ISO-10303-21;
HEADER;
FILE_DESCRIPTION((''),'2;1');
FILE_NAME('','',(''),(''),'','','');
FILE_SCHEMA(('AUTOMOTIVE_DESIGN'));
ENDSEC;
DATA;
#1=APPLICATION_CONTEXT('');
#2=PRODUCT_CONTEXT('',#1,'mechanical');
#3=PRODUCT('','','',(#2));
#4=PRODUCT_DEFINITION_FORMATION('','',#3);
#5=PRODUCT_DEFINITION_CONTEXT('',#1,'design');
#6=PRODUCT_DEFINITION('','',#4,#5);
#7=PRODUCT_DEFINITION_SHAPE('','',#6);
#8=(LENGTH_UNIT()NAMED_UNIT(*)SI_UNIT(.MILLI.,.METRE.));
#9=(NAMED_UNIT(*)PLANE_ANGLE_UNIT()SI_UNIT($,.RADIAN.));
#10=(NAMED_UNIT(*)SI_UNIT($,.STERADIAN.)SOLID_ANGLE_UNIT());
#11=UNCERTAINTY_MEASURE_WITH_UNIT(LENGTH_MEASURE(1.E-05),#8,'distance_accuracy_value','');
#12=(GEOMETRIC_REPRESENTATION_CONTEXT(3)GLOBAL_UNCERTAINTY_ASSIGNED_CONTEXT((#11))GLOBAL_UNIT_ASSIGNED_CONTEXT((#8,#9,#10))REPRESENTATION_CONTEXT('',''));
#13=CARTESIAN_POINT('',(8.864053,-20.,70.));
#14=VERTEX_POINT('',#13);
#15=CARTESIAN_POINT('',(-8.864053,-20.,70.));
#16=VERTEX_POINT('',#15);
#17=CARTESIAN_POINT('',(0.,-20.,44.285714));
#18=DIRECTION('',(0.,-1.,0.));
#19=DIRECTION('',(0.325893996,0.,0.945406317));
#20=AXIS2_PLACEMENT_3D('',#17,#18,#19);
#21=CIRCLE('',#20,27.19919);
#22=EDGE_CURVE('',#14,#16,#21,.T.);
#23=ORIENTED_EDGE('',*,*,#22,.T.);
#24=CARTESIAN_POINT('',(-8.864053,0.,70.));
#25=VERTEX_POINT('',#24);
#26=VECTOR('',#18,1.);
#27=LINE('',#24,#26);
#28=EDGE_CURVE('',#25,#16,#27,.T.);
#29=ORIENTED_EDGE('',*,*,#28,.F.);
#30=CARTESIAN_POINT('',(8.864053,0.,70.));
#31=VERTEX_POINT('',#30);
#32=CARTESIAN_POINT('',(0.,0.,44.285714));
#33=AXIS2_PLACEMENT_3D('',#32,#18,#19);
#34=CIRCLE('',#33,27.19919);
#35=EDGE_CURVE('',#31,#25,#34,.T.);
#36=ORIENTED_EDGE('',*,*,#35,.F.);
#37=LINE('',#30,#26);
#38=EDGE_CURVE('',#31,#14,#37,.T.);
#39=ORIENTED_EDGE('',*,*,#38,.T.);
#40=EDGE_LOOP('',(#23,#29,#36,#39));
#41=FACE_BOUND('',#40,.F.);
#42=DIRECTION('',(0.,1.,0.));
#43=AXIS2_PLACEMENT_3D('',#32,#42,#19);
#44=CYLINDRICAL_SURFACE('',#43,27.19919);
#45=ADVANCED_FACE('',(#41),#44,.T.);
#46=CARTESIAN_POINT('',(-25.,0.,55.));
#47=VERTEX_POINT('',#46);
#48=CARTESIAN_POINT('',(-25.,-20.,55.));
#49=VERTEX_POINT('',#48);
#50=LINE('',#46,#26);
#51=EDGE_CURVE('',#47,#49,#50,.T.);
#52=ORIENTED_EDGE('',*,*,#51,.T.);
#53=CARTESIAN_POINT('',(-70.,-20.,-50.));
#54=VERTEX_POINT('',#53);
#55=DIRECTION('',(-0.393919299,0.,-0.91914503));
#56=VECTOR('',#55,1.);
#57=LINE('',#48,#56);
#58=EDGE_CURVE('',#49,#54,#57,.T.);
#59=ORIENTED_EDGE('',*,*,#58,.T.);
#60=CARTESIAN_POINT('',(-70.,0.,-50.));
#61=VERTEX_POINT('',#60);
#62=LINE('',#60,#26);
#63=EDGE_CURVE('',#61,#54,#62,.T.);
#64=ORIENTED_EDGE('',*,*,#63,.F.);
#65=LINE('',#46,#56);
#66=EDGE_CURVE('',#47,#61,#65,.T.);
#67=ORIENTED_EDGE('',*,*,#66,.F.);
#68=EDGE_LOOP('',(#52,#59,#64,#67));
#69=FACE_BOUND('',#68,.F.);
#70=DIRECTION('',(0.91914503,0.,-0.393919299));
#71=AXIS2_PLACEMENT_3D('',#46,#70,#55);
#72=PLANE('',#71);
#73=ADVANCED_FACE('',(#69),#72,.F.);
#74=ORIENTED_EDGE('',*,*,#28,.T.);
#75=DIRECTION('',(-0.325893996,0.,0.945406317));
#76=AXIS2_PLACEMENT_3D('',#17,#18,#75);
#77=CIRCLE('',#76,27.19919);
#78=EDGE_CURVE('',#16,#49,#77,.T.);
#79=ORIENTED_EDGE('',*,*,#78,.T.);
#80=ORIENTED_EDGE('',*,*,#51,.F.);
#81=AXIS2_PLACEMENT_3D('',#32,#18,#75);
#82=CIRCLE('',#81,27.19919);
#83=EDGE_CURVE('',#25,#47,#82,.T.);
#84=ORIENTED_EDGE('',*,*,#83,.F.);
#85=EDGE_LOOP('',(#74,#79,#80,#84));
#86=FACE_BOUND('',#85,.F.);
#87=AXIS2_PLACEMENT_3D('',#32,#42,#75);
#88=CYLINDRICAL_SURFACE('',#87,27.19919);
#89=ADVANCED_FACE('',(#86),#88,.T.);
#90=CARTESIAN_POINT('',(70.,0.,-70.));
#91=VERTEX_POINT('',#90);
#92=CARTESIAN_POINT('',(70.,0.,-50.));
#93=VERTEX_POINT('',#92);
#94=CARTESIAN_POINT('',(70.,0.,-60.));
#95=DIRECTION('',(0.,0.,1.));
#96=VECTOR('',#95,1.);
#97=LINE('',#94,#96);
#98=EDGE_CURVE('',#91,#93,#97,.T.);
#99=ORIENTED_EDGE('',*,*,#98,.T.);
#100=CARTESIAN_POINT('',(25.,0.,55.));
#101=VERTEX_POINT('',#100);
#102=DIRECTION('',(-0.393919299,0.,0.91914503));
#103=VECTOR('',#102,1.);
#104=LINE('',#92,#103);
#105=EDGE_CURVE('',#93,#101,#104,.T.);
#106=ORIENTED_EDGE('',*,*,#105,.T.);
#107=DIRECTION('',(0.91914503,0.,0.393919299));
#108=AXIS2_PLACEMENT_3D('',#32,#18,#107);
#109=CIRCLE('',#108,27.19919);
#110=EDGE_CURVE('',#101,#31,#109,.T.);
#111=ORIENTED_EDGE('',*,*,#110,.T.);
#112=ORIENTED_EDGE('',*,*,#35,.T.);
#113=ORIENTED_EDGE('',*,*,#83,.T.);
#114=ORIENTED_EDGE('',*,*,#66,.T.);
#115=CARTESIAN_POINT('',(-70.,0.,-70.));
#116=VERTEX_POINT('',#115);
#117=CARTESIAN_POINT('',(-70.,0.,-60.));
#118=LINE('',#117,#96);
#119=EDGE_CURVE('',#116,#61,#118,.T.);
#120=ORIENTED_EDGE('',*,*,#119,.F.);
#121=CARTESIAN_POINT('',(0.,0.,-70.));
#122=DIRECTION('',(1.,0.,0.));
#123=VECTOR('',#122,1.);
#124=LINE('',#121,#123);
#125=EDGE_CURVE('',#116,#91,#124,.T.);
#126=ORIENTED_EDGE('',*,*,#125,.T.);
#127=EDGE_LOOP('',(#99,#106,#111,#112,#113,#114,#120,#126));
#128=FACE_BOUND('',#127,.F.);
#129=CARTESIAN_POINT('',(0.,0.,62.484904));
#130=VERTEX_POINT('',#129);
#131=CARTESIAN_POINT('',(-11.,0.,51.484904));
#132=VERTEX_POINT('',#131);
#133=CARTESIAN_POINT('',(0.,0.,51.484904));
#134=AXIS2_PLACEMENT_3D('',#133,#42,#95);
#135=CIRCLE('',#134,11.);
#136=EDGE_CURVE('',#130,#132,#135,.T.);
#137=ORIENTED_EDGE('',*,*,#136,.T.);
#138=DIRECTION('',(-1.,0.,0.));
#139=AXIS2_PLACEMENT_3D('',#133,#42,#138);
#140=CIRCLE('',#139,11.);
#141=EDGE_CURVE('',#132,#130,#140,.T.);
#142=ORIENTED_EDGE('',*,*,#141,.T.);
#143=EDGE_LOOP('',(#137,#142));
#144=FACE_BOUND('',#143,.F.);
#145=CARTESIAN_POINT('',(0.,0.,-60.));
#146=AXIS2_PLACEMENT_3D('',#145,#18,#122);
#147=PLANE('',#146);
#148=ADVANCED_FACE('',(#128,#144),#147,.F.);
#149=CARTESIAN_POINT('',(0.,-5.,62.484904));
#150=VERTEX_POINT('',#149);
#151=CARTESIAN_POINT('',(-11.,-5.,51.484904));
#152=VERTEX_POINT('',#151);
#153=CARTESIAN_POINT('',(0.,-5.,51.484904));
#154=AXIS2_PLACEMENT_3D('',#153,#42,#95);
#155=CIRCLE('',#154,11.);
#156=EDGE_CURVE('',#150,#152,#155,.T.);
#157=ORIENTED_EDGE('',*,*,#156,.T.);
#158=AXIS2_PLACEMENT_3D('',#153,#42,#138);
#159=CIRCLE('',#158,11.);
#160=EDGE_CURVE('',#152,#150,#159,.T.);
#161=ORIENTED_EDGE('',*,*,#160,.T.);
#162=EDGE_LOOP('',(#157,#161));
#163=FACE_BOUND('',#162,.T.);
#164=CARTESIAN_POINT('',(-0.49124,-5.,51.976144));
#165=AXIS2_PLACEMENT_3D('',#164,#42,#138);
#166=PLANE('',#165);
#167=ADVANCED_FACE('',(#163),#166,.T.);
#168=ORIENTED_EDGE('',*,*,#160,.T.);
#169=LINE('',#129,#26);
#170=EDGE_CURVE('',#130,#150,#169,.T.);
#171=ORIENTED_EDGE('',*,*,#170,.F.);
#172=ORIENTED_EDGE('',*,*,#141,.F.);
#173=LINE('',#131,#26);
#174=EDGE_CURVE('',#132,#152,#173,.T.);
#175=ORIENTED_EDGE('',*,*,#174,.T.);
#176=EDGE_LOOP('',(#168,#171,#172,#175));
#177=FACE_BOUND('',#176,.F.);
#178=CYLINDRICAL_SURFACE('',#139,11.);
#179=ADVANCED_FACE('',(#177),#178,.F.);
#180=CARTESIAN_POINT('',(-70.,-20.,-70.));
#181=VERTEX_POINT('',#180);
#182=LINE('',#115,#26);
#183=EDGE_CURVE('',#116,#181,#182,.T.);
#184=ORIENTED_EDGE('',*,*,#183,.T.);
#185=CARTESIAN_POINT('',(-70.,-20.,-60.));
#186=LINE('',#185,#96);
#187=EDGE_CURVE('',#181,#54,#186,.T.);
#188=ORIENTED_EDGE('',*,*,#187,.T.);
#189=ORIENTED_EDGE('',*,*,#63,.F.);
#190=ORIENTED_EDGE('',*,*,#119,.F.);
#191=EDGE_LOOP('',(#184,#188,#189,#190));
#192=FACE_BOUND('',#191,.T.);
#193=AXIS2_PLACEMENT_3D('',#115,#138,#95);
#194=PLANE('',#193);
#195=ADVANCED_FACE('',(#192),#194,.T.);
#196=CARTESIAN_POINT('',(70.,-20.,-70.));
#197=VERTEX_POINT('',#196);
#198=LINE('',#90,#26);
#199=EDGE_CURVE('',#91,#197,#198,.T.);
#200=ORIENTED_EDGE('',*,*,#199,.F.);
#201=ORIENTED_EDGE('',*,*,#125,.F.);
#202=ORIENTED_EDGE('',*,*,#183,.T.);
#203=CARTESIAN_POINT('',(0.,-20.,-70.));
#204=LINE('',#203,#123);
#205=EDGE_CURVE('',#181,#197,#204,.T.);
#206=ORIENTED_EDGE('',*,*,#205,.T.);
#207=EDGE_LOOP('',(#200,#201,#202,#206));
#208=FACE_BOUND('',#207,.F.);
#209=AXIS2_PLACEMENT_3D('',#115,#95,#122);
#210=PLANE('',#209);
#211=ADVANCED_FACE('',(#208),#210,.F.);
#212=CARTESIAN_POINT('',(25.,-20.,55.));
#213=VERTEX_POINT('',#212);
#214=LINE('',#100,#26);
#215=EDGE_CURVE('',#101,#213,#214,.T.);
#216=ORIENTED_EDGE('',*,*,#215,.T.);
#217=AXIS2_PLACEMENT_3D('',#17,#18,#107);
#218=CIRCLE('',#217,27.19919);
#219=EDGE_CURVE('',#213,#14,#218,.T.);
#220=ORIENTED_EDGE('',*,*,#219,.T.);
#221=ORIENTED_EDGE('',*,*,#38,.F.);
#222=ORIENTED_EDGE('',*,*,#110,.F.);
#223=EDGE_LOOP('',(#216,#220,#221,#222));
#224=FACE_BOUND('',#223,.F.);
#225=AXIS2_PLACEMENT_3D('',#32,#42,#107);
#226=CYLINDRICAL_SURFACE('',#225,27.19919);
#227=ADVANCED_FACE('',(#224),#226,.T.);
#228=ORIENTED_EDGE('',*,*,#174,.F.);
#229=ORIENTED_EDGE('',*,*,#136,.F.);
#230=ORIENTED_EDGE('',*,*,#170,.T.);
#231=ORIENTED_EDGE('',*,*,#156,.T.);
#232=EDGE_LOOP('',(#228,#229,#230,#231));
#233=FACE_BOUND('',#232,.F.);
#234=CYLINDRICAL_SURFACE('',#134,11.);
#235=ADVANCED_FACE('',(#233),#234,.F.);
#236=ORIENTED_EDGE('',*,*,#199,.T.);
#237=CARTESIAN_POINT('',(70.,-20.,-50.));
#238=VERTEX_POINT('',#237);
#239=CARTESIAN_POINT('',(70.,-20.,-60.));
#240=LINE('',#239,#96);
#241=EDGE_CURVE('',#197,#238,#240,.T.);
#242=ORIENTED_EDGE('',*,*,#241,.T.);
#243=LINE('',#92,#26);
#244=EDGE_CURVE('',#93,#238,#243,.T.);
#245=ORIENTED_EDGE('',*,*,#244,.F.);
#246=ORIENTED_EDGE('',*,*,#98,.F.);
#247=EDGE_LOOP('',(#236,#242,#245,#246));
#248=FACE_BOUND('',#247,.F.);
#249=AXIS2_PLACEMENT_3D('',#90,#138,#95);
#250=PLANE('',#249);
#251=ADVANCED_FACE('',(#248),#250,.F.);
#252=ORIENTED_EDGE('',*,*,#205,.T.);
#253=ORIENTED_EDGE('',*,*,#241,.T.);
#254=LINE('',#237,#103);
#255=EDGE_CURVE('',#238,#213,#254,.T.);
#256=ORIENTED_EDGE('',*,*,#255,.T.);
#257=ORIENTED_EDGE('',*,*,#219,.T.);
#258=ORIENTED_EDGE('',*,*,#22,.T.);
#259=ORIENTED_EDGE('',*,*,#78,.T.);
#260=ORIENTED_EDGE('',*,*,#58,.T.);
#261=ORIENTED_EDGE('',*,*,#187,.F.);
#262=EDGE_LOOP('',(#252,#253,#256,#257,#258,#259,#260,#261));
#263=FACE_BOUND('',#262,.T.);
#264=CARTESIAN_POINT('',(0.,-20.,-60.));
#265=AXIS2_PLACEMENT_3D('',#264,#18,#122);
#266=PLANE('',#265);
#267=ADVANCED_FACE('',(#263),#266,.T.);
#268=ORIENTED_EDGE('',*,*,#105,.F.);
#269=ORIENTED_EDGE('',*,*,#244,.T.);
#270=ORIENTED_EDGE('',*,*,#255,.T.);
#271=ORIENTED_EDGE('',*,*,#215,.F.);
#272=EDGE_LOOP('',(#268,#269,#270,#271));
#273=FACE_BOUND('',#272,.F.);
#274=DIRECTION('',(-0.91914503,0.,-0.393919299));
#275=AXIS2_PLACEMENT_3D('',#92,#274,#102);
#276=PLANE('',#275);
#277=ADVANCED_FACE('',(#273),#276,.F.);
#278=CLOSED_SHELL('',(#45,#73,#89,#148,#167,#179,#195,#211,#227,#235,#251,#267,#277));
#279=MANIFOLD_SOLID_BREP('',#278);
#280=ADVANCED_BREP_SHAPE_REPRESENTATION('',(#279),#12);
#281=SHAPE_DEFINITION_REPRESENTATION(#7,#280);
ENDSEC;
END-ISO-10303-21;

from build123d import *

# Parameters (mm, degrees)
F0_W     = 140
F0_H     = 20
F1_DEPTH = 20
F3_DEPTH = 5


with BuildPart() as f1:
    # F0 (on Front) → F1 (new body)
    with BuildSketch(Plane.XZ):
        with Locations((0, -60)):
            Rectangle(F0_W, F0_H)
        with BuildLine():
            Line((-70, -50), (70, -50))
            Line((70, -50), (25, 55))
            ThreePointArc((25, 55), (18.5187341548, 64.2068689629), (8.8640526043, 70))
            Line((8.8640526043, 70), (-8.8640526043, 70))
            ThreePointArc((-8.8640526043, 70), (-18.5187341548, 64.2068689629), (-25, 55))
            Line((-25, 55), (-70, -50))
        make_face()
        with BuildLine():
            Line((-8.8640526043, 70), (8.8640526043, 70))
            ThreePointArc((8.8640526043, 70), (0, 71.4849039495), (-8.8640526043, 70))
        make_face()
    extrude(amount=F1_DEPTH)

    # F2 (on face) → F3 (cut)
    with BuildSketch(Plane(origin=(0, 0, 0), x_dir=(-1, 0, 0), z_dir=(0, 1, 0))):
        with BuildLine():
            ThreePointArc((11, 51.4849039495), (7.7781745931, 59.2630785426), (0, 62.4849039495))
            ThreePointArc((0, 62.4849039495), (-7.7781745931, 43.7067293565), (11, 51.4849039495))
        make_face()
    extrude(amount=-F3_DEPTH, mode=Mode.SUBTRACT)


solid = f1.part
